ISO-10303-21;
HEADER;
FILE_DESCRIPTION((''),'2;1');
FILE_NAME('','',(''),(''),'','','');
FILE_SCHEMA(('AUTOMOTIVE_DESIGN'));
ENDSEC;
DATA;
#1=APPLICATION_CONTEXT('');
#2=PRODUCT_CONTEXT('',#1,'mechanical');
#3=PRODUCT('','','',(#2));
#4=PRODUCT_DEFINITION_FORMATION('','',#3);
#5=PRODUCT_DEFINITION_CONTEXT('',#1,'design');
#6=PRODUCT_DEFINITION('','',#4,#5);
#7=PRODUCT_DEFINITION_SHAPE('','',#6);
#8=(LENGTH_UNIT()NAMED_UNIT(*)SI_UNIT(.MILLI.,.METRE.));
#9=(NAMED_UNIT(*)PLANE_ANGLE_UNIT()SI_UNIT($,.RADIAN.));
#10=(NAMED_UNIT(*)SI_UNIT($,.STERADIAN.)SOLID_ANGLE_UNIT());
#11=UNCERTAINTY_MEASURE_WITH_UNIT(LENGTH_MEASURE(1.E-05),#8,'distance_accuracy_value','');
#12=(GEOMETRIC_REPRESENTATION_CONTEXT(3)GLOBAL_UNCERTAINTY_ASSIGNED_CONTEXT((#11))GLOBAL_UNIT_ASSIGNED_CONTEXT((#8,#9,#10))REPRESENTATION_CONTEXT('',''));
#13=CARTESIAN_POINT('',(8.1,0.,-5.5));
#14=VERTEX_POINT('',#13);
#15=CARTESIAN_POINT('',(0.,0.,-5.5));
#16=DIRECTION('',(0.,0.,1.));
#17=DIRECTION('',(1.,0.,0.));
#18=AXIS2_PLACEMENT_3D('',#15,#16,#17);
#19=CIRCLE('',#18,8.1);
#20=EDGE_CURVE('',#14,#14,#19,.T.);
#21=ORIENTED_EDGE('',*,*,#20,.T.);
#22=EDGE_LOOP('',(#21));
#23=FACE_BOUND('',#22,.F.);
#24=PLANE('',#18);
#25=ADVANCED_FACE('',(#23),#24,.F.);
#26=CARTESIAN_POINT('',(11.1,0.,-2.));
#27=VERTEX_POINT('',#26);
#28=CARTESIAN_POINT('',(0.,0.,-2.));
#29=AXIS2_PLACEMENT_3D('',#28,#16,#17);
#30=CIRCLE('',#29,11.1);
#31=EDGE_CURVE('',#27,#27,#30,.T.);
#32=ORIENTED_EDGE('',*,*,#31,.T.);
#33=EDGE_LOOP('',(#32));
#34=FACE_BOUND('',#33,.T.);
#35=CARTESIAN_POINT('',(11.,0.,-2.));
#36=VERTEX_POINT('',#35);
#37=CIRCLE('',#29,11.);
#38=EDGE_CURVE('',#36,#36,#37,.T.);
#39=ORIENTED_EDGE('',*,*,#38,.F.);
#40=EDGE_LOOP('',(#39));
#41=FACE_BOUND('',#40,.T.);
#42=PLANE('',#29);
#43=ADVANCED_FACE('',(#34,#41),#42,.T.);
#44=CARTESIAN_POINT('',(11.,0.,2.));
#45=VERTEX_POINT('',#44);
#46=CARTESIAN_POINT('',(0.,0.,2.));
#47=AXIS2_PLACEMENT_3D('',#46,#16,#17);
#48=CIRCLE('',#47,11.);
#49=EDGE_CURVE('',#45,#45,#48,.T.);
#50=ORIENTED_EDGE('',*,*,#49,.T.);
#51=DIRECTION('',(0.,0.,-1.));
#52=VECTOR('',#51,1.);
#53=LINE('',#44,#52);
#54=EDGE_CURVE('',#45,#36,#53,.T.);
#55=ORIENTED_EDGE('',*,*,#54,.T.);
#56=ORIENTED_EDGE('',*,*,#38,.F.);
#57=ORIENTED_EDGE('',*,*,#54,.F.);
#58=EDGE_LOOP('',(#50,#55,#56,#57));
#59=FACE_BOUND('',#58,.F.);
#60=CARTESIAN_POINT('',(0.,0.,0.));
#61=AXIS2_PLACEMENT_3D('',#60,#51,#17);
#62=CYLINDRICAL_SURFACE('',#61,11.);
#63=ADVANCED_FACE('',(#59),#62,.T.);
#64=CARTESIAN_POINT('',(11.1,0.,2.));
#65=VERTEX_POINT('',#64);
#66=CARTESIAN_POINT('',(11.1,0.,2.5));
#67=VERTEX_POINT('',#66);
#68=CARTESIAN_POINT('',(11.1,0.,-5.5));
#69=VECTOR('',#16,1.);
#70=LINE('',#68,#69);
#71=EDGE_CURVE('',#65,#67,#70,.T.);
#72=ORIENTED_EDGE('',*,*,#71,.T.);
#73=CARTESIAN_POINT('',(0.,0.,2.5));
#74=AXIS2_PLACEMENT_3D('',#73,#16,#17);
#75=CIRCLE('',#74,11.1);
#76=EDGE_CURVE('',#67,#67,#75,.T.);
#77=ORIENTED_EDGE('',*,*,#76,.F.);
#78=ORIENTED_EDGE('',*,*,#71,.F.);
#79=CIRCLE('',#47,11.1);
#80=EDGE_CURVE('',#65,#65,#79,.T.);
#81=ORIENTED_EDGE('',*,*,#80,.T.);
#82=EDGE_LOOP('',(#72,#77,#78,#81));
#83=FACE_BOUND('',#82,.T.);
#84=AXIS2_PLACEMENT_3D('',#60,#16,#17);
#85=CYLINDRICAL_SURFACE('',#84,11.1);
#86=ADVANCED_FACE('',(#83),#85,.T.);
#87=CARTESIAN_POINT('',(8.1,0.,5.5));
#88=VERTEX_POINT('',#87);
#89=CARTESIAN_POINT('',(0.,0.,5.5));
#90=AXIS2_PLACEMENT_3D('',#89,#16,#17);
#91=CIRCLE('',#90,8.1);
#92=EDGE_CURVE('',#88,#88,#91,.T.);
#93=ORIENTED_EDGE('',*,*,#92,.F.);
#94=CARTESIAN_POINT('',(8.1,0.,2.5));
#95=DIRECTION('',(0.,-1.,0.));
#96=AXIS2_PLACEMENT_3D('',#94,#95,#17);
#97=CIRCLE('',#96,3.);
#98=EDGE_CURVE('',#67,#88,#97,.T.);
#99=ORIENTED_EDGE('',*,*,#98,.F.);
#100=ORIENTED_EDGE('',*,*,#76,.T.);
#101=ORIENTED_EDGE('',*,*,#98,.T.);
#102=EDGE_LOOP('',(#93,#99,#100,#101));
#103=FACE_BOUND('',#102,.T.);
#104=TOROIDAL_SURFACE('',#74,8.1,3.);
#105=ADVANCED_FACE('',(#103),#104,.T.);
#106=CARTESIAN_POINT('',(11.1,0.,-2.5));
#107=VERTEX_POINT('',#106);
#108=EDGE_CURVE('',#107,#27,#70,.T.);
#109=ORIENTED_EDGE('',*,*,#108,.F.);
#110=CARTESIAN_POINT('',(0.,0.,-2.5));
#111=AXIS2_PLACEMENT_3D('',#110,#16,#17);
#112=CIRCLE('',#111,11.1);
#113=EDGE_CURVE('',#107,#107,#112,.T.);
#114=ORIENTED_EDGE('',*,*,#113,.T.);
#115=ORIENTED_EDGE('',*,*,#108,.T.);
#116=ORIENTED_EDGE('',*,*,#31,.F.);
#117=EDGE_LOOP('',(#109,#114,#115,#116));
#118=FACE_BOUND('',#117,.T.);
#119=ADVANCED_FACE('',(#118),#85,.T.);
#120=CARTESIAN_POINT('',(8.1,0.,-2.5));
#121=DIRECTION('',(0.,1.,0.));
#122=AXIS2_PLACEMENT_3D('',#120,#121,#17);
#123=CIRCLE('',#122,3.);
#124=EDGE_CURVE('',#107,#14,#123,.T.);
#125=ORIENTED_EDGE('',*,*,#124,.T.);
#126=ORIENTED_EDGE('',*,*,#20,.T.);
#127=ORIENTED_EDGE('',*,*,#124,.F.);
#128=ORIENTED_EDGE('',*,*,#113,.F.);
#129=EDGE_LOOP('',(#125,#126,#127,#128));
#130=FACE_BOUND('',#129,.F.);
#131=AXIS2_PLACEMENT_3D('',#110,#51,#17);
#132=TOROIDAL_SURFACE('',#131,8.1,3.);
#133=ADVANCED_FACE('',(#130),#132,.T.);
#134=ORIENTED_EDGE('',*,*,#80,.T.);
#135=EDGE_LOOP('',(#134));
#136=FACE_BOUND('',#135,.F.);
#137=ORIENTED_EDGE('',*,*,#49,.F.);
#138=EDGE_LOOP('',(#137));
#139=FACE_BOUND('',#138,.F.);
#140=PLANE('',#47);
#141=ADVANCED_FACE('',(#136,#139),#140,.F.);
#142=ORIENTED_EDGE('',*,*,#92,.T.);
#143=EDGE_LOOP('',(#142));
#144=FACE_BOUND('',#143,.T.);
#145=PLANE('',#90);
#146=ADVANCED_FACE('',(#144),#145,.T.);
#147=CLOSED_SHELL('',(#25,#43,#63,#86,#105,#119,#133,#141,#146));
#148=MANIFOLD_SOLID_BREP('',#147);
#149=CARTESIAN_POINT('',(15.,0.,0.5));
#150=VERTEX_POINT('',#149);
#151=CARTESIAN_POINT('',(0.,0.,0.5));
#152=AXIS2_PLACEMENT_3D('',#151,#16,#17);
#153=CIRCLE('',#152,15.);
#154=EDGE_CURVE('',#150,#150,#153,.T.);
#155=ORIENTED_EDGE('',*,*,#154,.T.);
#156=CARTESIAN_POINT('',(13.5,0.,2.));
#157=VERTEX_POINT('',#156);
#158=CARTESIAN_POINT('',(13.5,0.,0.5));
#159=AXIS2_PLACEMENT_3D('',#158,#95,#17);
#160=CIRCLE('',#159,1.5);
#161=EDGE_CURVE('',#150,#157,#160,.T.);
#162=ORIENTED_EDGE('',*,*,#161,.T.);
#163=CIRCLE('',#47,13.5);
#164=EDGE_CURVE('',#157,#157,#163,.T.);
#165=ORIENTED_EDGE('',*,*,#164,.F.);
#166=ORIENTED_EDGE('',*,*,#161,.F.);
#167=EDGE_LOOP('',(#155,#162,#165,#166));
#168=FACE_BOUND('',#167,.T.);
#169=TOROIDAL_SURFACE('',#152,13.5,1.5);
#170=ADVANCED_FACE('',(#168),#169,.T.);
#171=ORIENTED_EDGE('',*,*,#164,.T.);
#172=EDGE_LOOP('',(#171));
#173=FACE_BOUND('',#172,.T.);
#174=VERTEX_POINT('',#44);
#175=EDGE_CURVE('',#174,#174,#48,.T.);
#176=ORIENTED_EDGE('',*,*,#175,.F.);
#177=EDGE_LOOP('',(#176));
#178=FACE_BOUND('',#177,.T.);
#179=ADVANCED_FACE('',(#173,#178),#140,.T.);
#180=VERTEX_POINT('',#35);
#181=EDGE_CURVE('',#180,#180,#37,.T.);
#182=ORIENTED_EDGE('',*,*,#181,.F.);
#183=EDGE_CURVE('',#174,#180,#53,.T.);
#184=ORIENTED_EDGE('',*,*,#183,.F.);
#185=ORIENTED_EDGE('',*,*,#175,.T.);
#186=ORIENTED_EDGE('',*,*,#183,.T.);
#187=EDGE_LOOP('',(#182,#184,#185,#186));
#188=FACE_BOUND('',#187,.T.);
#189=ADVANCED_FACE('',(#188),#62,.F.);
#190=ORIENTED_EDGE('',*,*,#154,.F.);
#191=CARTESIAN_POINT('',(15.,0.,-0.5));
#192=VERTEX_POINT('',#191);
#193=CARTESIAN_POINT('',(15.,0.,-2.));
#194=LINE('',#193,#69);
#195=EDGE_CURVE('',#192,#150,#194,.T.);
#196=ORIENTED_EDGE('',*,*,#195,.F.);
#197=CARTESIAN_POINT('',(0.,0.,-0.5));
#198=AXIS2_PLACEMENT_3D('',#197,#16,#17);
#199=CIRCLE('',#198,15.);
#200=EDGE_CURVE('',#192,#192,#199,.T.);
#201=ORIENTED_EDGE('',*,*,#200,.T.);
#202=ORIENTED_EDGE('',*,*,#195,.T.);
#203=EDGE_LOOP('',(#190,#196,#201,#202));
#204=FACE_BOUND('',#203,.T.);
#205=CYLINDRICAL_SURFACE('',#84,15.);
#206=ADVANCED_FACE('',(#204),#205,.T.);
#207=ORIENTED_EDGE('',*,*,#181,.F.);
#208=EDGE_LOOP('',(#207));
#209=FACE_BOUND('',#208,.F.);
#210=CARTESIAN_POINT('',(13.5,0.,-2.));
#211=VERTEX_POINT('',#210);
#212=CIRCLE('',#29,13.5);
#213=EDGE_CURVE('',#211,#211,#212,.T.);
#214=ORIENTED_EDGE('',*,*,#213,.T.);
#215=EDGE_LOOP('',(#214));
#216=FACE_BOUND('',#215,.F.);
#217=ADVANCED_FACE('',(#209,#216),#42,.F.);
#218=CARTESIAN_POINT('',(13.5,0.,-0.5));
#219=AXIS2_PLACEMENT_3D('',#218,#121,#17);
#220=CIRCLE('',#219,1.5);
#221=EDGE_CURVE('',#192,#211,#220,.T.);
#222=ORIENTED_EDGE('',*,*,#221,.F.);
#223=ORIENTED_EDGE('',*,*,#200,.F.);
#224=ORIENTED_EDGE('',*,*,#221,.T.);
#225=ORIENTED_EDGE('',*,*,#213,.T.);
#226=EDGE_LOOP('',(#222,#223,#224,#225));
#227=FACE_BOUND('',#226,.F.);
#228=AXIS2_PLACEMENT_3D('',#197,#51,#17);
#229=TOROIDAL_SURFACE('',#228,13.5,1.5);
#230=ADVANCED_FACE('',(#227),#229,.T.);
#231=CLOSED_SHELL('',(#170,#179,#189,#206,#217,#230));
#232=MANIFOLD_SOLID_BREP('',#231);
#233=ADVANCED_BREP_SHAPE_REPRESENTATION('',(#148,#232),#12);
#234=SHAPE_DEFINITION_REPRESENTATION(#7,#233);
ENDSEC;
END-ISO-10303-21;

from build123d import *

# Parameters (mm, degrees)
F2_R     = 15
F2_R_2   = 11
F3_DEPTH = 2
F4_R     = 11.1
F5_DEPTH = 5.5
F6_R     = 3
F9_R     = 1.5


with BuildPart() as f3:
    # F2 (on Top) → F3 (new body, symmetric)
    with BuildSketch(Plane.XY):
        Circle(F2_R)
        Circle(F2_R_2, mode=Mode.SUBTRACT)
    extrude(amount=F3_DEPTH, both=True)


with BuildPart() as f5:
    # F4 (on Top) → F5 (new body, symmetric)
    with BuildSketch(Plane.XY):
        Circle(F4_R)
    extrude(amount=F5_DEPTH, both=True)

    # F6
    f6_edges = [f5.edges().sort_by_distance(p)[0] for p in [
        (-11.1, 0, 5.5),
        (-11.1, 0, -5.5),
    ]]
    fillet(f6_edges, radius=F6_R)


with BuildPart() as f7_1:
    # F7: copy of F3
    add(f3.part)


with BuildPart() as f5_1:
    add(f5.part)

    # F8: cut F7_1
    add(f7_1.part, mode=Mode.SUBTRACT)


with BuildPart() as f3_1:
    add(f3.part)

    # F9
    f9_edges = [f3_1.edges().sort_by_distance(p)[0] for p in [
        (-15, 0, -2),
        (15, 0, 0),
        (-15, 0, 2),
    ]]
    fillet(f9_edges, radius=F9_R)


solid = Compound([f5_1.part, f3_1.part])
